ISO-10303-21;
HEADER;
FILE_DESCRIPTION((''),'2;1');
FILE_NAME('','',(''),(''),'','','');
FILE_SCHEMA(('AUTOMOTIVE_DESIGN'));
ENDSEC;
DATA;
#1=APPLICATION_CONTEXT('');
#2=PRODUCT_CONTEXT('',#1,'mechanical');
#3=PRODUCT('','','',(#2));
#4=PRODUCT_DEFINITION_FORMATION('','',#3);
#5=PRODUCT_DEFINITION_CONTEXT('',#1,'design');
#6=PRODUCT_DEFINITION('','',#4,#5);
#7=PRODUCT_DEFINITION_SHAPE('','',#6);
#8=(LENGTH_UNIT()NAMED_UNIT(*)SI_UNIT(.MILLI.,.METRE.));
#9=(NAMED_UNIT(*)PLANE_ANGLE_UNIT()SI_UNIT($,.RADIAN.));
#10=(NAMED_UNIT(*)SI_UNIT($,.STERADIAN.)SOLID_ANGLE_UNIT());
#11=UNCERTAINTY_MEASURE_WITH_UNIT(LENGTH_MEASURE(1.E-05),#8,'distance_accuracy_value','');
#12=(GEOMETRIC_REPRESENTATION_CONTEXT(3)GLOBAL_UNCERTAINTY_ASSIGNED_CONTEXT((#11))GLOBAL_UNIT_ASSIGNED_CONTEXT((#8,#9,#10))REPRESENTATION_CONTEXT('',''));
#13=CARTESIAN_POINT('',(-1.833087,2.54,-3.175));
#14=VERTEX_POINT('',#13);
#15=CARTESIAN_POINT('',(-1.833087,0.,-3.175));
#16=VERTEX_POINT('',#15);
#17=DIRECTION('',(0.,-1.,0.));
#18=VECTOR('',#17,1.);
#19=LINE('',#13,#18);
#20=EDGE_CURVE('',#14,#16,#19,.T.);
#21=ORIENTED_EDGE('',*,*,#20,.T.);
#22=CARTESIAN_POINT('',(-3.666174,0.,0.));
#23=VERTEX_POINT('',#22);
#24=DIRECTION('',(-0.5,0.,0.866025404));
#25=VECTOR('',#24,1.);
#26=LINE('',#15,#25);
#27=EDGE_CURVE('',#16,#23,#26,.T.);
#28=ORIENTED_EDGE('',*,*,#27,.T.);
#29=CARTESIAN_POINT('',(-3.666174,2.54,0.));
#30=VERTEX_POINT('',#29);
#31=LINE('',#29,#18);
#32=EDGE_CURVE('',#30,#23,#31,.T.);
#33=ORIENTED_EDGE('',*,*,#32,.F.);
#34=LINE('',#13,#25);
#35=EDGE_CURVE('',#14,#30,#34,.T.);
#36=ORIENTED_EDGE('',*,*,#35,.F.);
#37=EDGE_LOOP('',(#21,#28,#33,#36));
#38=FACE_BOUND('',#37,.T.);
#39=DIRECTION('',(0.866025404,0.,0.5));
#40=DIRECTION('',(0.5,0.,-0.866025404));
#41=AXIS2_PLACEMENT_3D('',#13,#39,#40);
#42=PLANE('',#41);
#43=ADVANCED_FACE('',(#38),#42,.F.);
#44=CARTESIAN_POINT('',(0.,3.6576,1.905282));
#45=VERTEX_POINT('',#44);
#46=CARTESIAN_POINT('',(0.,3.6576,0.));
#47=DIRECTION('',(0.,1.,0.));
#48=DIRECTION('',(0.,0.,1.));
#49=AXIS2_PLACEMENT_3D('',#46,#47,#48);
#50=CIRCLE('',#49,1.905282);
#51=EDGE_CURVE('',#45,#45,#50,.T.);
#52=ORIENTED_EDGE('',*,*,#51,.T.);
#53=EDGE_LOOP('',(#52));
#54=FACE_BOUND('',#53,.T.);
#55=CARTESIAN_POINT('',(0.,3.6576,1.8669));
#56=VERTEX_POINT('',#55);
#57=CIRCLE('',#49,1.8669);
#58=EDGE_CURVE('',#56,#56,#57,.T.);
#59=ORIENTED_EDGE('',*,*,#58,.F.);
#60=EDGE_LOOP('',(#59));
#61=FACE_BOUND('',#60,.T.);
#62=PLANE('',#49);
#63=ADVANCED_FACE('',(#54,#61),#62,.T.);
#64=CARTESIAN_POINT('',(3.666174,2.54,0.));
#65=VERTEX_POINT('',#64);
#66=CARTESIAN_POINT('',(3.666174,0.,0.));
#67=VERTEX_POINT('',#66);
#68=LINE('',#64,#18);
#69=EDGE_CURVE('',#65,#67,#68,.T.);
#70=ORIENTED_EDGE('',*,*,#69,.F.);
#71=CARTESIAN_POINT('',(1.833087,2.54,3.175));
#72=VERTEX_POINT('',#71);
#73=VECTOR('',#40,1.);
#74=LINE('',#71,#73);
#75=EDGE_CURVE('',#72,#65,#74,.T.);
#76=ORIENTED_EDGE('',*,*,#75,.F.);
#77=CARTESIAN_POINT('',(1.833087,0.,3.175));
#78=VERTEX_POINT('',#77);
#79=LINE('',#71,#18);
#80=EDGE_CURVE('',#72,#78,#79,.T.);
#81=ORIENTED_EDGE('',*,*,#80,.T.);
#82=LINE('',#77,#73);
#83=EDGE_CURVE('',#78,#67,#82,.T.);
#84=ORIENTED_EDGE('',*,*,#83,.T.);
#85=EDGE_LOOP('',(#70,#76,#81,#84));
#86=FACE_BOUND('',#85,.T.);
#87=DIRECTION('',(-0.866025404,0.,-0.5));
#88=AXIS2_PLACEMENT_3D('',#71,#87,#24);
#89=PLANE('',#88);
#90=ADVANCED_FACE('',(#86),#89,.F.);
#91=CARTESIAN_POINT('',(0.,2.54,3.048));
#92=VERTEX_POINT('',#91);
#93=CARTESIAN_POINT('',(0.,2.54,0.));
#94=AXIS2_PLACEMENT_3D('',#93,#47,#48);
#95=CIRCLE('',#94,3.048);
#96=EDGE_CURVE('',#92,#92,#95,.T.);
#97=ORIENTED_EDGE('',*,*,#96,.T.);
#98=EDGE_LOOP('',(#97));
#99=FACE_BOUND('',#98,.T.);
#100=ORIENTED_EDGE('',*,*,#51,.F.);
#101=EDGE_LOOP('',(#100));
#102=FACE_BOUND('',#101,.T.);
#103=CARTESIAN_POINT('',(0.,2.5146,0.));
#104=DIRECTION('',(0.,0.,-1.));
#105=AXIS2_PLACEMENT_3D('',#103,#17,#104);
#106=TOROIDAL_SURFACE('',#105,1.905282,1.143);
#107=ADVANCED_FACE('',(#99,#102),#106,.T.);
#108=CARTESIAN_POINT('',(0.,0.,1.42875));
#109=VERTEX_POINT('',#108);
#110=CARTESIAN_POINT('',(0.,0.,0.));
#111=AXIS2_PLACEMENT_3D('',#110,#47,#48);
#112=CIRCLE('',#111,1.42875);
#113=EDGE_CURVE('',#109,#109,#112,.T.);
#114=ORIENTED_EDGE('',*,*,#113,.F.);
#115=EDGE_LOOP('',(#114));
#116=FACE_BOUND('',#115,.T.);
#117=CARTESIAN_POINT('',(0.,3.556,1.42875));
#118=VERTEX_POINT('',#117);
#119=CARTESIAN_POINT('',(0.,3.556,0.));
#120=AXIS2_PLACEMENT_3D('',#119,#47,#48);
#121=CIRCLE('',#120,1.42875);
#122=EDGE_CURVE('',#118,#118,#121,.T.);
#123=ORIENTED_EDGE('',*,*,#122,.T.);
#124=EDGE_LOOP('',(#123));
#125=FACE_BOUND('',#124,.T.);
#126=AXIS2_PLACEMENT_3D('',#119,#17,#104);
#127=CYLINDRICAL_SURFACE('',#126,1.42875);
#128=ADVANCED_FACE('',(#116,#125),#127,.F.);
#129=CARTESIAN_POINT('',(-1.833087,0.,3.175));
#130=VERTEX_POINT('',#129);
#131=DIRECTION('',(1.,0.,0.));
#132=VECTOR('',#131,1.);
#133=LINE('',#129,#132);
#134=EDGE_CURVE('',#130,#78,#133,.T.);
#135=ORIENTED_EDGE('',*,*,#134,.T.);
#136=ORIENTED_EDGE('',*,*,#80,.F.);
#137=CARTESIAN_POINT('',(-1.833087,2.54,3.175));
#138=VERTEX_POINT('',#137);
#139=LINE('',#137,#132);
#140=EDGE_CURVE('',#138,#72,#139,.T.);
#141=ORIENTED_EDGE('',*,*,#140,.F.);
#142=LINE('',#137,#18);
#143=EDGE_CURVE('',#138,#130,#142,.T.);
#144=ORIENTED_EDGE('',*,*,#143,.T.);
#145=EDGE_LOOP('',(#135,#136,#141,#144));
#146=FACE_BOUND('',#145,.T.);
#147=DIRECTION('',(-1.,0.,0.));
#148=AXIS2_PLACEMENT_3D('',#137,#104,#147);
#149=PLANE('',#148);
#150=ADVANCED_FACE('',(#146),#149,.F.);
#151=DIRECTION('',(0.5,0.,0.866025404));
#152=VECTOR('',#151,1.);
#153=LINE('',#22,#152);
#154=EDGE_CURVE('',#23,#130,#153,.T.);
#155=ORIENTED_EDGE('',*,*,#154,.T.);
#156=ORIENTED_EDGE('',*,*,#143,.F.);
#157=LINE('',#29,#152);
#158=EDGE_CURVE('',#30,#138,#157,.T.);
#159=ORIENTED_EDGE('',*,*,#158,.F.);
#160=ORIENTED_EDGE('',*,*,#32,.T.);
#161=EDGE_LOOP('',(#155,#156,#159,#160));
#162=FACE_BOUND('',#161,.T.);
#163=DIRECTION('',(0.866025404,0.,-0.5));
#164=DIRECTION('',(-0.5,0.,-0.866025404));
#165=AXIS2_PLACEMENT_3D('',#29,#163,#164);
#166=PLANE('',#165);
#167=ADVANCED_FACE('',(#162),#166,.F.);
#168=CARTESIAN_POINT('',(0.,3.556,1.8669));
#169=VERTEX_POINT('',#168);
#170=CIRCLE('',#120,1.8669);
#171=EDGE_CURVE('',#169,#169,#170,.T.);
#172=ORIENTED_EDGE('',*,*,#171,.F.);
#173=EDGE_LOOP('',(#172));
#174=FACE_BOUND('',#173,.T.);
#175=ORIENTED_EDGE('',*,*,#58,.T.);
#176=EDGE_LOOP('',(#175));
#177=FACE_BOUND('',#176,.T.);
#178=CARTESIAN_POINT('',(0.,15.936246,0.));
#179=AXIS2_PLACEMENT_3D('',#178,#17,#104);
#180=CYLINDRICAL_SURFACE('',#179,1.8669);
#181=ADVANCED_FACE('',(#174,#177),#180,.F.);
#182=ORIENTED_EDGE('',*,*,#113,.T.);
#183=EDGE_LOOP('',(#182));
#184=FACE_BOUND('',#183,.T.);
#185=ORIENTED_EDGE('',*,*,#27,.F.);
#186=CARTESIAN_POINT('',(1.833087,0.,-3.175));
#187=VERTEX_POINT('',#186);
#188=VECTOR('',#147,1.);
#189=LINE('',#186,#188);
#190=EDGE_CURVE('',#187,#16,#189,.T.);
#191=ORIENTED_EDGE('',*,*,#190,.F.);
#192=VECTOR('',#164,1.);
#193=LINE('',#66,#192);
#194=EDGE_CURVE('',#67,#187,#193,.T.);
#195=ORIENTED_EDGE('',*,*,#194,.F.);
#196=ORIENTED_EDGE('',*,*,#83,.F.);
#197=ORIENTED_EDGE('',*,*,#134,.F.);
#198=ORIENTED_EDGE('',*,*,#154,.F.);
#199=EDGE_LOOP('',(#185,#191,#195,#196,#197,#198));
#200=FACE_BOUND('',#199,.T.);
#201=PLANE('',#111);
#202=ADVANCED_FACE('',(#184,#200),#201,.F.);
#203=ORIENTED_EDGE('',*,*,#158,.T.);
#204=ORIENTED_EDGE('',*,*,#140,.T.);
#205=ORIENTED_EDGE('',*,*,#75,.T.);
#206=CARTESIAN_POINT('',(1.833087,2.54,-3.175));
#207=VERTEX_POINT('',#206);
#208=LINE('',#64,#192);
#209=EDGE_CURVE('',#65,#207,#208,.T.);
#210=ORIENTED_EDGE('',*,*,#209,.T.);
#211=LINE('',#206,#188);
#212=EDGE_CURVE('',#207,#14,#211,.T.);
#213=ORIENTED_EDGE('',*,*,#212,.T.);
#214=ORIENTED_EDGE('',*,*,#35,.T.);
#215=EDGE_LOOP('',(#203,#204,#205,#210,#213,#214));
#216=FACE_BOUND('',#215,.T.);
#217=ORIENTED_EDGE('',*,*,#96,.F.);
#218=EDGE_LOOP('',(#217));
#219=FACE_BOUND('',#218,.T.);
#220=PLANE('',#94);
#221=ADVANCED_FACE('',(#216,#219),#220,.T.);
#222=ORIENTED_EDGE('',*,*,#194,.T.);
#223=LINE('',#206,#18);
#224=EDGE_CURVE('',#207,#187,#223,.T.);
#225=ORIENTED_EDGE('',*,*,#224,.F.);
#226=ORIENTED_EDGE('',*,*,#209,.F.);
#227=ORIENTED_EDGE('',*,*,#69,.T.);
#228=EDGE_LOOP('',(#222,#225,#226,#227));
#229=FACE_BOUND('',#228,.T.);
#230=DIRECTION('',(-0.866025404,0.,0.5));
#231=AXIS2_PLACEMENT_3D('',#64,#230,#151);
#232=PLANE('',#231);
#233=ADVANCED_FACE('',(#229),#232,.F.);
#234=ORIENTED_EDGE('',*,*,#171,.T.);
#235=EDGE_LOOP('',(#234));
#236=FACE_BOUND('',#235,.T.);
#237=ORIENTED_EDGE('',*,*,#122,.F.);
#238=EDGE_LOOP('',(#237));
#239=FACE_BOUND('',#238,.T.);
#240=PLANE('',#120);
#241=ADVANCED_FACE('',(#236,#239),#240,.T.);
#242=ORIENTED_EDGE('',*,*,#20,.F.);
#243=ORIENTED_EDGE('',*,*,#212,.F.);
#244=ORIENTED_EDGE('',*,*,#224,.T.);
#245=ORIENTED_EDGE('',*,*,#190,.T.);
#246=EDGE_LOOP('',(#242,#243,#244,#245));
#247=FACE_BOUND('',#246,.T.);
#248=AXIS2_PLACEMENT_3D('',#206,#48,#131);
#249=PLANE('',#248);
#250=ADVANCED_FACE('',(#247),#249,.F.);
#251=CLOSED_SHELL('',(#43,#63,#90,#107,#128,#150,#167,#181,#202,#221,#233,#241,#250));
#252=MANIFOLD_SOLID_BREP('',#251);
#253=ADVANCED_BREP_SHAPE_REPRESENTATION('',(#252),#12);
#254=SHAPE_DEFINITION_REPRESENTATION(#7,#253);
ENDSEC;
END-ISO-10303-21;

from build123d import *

# Parameters (mm, degrees)
BOSS_EXTRUDE1_DEPTH = 2.54
SKETCH2_R           = 3.048
SKETCH2_R_2         = 1.8669
BOSS_EXTRUDE2_DEPTH = 1.1176
FILLET1_R           = 1.143
SKETCH3_R           = 1.8669
SKETCH3_R_2         = 1.42875
BOSS_EXTRUDE3_DEPTH = 1.016
SKETCH4_R           = 1.42875
CUT_EXTRUDE1_DEPTH  = 6.474765596


with BuildPart() as part:
    # Sketch1 → Boss-Extrude1 (new body)
    with BuildSketch(Plane(origin=(0, 0, 0), x_dir=(1, 0, 0), z_dir=(0, 1, 0))):
        Polygon((3.666174209, 0), (1.833087105, 3.175), (-1.833087105, 3.175), (-3.666174209, 0), (-1.833087105, -3.175), (1.833087105, -3.175), align=None)
    extrude(amount=BOSS_EXTRUDE1_DEPTH)

    # Sketch2 → Boss-Extrude2 (add)
    with BuildSketch(Plane(origin=(0, 2.54, 0), x_dir=(1, 0, 0), z_dir=(0, 1, 0))):
        with Locations(Location((0, 0, 0), (0, 0, 270))):
            Circle(SKETCH2_R)
        with Locations(Location((0, 0, 0), (0, 0, 270))):
            Circle(SKETCH2_R_2, mode=Mode.SUBTRACT)
    extrude(amount=BOSS_EXTRUDE2_DEPTH)

    # Fillet1
    # the kernel refuses this fillet: 1.143 mm, written as the material it takes off along each edge
    with BuildSketch(Plane(origin=(0, 3.6576, 0), x_dir=(0, 0, 1), z_dir=(-1, 0, 0))) as fillet1_piece_1_section:
        with BuildLine():
            CenterArc((3.048 - FILLET1_R, -FILLET1_R), FILLET1_R, 0, 90)
            Line((3.048 - FILLET1_R, 0), (3.048, 0))
            Line((3.048, 0), (3.048, -FILLET1_R))
        make_face()
    fillet1_piece_1 = revolve(axis=Axis((0, 3.6576, 0), (0, 1, 0)), mode=Mode.PRIVATE)
    fillet1_piece_1 = split(fillet1_piece_1, bisect_by=Plane(origin=(0, 2.54, -2.716774649), z_dir=(0, 1, 0)), keep=Keep.TOP, mode=Mode.PRIVATE)
    add(fillet1_piece_1, mode=Mode.SUBTRACT)

    # Sketch3 → Boss-Extrude3 (add)
    with BuildSketch(Plane(origin=(0, 2.54, 0), x_dir=(1, 0, 0), z_dir=(0, 1, 0))):
        with Locations(Location((0, 0, 0), (0, 0, 270))):
            Circle(SKETCH3_R)
        with Locations(Location((0, 0, 0), (0, 0, 270))):
            Circle(SKETCH3_R_2, mode=Mode.SUBTRACT)
    extrude(amount=BOSS_EXTRUDE3_DEPTH)

    # Sketch4 → Cut-Extrude1 (cut, through all)
    with BuildSketch(Plane(origin=(0, 2.54, 0), x_dir=(1, 0, 0), z_dir=(0, 1, 0))):
        with Locations(Location((0, 0, 0), (0, 0, 270))):
            Circle(SKETCH4_R)
    extrude(amount=-CUT_EXTRUDE1_DEPTH, mode=Mode.SUBTRACT)


solid = part.part
